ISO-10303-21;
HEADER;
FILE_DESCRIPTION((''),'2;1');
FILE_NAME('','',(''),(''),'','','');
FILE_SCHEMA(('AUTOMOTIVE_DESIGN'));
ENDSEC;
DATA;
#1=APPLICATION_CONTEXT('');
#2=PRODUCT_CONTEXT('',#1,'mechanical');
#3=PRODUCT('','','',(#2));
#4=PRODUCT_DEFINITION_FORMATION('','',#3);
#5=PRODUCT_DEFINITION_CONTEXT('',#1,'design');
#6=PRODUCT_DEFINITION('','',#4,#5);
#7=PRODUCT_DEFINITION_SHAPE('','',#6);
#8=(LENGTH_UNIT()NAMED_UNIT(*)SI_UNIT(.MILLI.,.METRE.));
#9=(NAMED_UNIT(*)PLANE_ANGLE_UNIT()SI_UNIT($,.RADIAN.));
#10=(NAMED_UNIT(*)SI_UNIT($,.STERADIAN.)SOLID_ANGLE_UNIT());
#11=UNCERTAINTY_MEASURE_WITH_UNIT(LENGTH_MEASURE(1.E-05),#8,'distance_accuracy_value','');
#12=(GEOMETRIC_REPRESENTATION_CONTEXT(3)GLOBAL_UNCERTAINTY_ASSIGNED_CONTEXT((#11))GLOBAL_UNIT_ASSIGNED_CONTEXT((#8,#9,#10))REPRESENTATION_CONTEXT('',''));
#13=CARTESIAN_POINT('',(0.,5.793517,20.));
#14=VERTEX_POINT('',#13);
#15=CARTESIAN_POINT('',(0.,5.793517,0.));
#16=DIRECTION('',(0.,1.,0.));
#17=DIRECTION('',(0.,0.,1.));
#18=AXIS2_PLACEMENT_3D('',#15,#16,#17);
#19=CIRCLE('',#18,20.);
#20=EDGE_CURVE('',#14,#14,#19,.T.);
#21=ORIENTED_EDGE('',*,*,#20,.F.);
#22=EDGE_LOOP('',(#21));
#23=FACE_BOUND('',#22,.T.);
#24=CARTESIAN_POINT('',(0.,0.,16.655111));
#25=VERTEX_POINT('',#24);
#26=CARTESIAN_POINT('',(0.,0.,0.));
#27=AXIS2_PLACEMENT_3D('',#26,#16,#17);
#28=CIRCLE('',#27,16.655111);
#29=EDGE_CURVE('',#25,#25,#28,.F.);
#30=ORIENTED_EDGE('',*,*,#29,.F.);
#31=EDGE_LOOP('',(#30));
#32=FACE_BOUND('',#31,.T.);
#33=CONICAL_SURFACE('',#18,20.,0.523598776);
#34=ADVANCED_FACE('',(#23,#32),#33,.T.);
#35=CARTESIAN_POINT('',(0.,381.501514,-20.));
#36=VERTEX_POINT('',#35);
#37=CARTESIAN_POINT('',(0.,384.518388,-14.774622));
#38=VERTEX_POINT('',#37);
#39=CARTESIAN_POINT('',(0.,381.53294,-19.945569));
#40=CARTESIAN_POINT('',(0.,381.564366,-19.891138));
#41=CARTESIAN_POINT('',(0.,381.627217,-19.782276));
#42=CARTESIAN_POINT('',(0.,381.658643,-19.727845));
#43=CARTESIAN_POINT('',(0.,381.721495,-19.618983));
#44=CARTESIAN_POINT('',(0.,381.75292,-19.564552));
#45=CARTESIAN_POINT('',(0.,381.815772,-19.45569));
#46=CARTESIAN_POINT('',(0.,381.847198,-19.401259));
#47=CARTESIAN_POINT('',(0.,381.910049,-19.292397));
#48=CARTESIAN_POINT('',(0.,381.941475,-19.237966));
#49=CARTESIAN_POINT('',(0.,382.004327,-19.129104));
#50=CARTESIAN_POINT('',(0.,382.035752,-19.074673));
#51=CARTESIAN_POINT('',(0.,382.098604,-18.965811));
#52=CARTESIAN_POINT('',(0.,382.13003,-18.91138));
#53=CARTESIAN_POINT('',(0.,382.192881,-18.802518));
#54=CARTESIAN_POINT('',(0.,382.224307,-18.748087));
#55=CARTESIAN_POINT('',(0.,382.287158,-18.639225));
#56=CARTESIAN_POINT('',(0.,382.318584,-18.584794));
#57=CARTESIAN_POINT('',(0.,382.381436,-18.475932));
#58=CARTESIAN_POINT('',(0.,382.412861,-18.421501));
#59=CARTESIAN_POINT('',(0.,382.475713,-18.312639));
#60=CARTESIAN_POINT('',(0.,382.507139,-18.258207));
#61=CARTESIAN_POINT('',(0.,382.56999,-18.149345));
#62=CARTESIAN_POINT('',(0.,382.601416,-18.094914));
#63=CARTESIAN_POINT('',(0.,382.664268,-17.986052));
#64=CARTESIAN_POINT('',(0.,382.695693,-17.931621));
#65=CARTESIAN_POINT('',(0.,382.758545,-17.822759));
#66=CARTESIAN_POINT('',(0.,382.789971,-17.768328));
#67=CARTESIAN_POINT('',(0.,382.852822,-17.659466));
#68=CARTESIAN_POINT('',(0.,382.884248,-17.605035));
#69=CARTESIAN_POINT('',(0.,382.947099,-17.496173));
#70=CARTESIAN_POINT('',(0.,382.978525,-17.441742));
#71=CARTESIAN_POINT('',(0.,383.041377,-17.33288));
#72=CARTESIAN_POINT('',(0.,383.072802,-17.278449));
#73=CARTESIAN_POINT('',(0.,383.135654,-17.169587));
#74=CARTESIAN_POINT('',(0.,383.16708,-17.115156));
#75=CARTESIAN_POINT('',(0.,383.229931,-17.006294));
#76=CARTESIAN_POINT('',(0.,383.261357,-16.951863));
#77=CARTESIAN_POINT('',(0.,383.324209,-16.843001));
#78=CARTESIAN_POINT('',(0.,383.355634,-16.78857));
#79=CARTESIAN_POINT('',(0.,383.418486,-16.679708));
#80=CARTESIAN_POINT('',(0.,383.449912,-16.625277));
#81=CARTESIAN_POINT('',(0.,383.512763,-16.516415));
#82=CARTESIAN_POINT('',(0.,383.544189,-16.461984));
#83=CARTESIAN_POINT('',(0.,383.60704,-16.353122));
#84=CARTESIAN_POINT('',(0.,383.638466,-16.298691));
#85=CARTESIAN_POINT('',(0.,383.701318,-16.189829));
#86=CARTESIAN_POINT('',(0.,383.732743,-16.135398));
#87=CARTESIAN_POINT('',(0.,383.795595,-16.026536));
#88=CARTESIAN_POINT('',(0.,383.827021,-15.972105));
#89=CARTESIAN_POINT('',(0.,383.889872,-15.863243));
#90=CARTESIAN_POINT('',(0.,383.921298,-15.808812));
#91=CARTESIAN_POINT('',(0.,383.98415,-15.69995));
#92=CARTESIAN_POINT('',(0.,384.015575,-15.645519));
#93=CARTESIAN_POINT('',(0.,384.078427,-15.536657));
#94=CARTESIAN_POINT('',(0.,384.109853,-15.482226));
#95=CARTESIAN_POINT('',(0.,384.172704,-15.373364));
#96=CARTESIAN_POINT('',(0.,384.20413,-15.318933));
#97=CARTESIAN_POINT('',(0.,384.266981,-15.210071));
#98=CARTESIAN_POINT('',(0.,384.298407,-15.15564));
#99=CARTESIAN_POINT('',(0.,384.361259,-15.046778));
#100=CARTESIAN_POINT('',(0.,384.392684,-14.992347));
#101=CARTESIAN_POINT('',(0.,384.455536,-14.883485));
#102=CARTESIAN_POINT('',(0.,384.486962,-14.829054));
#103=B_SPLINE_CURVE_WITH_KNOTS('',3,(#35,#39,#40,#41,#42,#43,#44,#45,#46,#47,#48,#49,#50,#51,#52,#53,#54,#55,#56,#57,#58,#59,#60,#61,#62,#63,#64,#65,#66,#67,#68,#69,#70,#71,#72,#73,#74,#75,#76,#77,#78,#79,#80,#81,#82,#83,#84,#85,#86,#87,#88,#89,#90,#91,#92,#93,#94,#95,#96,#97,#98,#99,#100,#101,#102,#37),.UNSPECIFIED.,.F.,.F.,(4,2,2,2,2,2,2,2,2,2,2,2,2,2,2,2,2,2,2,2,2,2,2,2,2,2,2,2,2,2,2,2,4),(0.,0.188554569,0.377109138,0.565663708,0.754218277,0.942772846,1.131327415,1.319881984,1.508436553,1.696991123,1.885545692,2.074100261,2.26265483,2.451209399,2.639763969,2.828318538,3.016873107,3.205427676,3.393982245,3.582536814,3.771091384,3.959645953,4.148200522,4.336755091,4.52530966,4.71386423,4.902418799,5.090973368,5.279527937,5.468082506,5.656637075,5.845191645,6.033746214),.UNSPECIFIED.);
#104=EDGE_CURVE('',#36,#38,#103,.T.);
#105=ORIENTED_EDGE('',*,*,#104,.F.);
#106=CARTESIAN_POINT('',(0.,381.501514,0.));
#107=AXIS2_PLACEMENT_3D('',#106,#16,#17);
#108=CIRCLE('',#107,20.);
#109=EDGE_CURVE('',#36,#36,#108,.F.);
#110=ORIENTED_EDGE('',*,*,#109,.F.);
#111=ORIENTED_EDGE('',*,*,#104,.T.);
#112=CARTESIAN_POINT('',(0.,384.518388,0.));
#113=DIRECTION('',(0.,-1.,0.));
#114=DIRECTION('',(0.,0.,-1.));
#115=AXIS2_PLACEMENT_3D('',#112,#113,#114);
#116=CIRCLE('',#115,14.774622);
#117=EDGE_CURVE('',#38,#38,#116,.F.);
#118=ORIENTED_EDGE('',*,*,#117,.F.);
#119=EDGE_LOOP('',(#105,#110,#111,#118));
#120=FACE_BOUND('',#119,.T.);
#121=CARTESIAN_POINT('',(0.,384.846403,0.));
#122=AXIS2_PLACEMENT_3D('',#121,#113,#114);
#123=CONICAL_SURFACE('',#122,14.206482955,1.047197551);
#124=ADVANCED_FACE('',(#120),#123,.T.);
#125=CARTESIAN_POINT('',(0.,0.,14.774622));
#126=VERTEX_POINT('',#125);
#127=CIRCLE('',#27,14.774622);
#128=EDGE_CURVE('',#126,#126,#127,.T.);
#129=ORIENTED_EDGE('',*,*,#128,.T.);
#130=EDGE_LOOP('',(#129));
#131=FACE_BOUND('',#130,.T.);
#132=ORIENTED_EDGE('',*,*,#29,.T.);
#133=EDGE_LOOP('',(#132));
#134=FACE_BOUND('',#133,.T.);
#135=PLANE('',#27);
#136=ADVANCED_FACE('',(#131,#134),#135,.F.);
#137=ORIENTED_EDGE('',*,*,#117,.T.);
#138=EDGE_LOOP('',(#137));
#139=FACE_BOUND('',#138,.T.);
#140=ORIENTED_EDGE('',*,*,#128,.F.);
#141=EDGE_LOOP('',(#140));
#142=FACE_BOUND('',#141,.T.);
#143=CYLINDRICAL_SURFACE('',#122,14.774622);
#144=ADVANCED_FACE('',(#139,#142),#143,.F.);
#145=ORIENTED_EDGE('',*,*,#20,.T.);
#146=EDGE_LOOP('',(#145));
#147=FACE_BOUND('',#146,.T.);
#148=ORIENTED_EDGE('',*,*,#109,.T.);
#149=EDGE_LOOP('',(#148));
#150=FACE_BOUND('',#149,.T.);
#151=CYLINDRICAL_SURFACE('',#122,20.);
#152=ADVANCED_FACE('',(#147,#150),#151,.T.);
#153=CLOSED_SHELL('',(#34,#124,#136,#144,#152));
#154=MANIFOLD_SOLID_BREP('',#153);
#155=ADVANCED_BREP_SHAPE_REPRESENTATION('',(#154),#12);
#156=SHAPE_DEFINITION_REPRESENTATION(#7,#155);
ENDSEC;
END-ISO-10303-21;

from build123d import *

# Parameters (mm, degrees)
SKETCH1_R           = 20
BOSS_EXTRUDE1_DEPTH = 384.846403
SKETCH2_R           = 14.774622499
CUT_EXTRUDE1_DEPTH  = 386.88437893
CHAMFER1_SIZE       = 3.344889
CHAMFER1_SIZE_2     = 5.793517


with BuildPart() as part:
    # Sketch1 → Boss-Extrude1 (new body)
    with BuildSketch(Plane(origin=(0, 0, 0), x_dir=(1, 0, 0), z_dir=(0, 1, 0))):
        with Locations(Location((0, 0, 0), (0, 0, 270))):
            Circle(SKETCH1_R)
    extrude(amount=BOSS_EXTRUDE1_DEPTH)

    # Sketch2 → Cut-Extrude1 (cut, through all)
    with BuildSketch(Plane(origin=(0, 0, 0), x_dir=(1, 0, 0), z_dir=(0, 1, 0))):
        with Locations(Location((0, 0, 0), (0, 0, 270))):
            Circle(SKETCH2_R)
    extrude(amount=CUT_EXTRUDE1_DEPTH, mode=Mode.SUBTRACT)

    # Chamfer1
    # the kernel refuses this chamfer: 5.793517, 3.344889 mm, written as the material it takes off along each edge
    with BuildSketch(Plane(origin=(0, 384.846403, 0), x_dir=(0, 0, 1), z_dir=(-1, 0, 0))) as chamfer1_piece_1:
        Polygon((20, -CHAMFER1_SIZE), (20 - CHAMFER1_SIZE_2, 0), (20, 0), align=None)
    revolve(axis=Axis((0, 384.846403, 0), (0, 1, 0)), mode=Mode.SUBTRACT)
    with BuildSketch(Plane(origin=(0, 0, 0), x_dir=(0, 0, 1), z_dir=(-1, 0, 0))) as chamfer1_piece_2:
        Polygon((20, CHAMFER1_SIZE_2), (20 - CHAMFER1_SIZE, 0), (20, 0), align=None)
    revolve(axis=Axis((0, 0, 0), (0, 1, 0)), mode=Mode.SUBTRACT)


solid = part.part
